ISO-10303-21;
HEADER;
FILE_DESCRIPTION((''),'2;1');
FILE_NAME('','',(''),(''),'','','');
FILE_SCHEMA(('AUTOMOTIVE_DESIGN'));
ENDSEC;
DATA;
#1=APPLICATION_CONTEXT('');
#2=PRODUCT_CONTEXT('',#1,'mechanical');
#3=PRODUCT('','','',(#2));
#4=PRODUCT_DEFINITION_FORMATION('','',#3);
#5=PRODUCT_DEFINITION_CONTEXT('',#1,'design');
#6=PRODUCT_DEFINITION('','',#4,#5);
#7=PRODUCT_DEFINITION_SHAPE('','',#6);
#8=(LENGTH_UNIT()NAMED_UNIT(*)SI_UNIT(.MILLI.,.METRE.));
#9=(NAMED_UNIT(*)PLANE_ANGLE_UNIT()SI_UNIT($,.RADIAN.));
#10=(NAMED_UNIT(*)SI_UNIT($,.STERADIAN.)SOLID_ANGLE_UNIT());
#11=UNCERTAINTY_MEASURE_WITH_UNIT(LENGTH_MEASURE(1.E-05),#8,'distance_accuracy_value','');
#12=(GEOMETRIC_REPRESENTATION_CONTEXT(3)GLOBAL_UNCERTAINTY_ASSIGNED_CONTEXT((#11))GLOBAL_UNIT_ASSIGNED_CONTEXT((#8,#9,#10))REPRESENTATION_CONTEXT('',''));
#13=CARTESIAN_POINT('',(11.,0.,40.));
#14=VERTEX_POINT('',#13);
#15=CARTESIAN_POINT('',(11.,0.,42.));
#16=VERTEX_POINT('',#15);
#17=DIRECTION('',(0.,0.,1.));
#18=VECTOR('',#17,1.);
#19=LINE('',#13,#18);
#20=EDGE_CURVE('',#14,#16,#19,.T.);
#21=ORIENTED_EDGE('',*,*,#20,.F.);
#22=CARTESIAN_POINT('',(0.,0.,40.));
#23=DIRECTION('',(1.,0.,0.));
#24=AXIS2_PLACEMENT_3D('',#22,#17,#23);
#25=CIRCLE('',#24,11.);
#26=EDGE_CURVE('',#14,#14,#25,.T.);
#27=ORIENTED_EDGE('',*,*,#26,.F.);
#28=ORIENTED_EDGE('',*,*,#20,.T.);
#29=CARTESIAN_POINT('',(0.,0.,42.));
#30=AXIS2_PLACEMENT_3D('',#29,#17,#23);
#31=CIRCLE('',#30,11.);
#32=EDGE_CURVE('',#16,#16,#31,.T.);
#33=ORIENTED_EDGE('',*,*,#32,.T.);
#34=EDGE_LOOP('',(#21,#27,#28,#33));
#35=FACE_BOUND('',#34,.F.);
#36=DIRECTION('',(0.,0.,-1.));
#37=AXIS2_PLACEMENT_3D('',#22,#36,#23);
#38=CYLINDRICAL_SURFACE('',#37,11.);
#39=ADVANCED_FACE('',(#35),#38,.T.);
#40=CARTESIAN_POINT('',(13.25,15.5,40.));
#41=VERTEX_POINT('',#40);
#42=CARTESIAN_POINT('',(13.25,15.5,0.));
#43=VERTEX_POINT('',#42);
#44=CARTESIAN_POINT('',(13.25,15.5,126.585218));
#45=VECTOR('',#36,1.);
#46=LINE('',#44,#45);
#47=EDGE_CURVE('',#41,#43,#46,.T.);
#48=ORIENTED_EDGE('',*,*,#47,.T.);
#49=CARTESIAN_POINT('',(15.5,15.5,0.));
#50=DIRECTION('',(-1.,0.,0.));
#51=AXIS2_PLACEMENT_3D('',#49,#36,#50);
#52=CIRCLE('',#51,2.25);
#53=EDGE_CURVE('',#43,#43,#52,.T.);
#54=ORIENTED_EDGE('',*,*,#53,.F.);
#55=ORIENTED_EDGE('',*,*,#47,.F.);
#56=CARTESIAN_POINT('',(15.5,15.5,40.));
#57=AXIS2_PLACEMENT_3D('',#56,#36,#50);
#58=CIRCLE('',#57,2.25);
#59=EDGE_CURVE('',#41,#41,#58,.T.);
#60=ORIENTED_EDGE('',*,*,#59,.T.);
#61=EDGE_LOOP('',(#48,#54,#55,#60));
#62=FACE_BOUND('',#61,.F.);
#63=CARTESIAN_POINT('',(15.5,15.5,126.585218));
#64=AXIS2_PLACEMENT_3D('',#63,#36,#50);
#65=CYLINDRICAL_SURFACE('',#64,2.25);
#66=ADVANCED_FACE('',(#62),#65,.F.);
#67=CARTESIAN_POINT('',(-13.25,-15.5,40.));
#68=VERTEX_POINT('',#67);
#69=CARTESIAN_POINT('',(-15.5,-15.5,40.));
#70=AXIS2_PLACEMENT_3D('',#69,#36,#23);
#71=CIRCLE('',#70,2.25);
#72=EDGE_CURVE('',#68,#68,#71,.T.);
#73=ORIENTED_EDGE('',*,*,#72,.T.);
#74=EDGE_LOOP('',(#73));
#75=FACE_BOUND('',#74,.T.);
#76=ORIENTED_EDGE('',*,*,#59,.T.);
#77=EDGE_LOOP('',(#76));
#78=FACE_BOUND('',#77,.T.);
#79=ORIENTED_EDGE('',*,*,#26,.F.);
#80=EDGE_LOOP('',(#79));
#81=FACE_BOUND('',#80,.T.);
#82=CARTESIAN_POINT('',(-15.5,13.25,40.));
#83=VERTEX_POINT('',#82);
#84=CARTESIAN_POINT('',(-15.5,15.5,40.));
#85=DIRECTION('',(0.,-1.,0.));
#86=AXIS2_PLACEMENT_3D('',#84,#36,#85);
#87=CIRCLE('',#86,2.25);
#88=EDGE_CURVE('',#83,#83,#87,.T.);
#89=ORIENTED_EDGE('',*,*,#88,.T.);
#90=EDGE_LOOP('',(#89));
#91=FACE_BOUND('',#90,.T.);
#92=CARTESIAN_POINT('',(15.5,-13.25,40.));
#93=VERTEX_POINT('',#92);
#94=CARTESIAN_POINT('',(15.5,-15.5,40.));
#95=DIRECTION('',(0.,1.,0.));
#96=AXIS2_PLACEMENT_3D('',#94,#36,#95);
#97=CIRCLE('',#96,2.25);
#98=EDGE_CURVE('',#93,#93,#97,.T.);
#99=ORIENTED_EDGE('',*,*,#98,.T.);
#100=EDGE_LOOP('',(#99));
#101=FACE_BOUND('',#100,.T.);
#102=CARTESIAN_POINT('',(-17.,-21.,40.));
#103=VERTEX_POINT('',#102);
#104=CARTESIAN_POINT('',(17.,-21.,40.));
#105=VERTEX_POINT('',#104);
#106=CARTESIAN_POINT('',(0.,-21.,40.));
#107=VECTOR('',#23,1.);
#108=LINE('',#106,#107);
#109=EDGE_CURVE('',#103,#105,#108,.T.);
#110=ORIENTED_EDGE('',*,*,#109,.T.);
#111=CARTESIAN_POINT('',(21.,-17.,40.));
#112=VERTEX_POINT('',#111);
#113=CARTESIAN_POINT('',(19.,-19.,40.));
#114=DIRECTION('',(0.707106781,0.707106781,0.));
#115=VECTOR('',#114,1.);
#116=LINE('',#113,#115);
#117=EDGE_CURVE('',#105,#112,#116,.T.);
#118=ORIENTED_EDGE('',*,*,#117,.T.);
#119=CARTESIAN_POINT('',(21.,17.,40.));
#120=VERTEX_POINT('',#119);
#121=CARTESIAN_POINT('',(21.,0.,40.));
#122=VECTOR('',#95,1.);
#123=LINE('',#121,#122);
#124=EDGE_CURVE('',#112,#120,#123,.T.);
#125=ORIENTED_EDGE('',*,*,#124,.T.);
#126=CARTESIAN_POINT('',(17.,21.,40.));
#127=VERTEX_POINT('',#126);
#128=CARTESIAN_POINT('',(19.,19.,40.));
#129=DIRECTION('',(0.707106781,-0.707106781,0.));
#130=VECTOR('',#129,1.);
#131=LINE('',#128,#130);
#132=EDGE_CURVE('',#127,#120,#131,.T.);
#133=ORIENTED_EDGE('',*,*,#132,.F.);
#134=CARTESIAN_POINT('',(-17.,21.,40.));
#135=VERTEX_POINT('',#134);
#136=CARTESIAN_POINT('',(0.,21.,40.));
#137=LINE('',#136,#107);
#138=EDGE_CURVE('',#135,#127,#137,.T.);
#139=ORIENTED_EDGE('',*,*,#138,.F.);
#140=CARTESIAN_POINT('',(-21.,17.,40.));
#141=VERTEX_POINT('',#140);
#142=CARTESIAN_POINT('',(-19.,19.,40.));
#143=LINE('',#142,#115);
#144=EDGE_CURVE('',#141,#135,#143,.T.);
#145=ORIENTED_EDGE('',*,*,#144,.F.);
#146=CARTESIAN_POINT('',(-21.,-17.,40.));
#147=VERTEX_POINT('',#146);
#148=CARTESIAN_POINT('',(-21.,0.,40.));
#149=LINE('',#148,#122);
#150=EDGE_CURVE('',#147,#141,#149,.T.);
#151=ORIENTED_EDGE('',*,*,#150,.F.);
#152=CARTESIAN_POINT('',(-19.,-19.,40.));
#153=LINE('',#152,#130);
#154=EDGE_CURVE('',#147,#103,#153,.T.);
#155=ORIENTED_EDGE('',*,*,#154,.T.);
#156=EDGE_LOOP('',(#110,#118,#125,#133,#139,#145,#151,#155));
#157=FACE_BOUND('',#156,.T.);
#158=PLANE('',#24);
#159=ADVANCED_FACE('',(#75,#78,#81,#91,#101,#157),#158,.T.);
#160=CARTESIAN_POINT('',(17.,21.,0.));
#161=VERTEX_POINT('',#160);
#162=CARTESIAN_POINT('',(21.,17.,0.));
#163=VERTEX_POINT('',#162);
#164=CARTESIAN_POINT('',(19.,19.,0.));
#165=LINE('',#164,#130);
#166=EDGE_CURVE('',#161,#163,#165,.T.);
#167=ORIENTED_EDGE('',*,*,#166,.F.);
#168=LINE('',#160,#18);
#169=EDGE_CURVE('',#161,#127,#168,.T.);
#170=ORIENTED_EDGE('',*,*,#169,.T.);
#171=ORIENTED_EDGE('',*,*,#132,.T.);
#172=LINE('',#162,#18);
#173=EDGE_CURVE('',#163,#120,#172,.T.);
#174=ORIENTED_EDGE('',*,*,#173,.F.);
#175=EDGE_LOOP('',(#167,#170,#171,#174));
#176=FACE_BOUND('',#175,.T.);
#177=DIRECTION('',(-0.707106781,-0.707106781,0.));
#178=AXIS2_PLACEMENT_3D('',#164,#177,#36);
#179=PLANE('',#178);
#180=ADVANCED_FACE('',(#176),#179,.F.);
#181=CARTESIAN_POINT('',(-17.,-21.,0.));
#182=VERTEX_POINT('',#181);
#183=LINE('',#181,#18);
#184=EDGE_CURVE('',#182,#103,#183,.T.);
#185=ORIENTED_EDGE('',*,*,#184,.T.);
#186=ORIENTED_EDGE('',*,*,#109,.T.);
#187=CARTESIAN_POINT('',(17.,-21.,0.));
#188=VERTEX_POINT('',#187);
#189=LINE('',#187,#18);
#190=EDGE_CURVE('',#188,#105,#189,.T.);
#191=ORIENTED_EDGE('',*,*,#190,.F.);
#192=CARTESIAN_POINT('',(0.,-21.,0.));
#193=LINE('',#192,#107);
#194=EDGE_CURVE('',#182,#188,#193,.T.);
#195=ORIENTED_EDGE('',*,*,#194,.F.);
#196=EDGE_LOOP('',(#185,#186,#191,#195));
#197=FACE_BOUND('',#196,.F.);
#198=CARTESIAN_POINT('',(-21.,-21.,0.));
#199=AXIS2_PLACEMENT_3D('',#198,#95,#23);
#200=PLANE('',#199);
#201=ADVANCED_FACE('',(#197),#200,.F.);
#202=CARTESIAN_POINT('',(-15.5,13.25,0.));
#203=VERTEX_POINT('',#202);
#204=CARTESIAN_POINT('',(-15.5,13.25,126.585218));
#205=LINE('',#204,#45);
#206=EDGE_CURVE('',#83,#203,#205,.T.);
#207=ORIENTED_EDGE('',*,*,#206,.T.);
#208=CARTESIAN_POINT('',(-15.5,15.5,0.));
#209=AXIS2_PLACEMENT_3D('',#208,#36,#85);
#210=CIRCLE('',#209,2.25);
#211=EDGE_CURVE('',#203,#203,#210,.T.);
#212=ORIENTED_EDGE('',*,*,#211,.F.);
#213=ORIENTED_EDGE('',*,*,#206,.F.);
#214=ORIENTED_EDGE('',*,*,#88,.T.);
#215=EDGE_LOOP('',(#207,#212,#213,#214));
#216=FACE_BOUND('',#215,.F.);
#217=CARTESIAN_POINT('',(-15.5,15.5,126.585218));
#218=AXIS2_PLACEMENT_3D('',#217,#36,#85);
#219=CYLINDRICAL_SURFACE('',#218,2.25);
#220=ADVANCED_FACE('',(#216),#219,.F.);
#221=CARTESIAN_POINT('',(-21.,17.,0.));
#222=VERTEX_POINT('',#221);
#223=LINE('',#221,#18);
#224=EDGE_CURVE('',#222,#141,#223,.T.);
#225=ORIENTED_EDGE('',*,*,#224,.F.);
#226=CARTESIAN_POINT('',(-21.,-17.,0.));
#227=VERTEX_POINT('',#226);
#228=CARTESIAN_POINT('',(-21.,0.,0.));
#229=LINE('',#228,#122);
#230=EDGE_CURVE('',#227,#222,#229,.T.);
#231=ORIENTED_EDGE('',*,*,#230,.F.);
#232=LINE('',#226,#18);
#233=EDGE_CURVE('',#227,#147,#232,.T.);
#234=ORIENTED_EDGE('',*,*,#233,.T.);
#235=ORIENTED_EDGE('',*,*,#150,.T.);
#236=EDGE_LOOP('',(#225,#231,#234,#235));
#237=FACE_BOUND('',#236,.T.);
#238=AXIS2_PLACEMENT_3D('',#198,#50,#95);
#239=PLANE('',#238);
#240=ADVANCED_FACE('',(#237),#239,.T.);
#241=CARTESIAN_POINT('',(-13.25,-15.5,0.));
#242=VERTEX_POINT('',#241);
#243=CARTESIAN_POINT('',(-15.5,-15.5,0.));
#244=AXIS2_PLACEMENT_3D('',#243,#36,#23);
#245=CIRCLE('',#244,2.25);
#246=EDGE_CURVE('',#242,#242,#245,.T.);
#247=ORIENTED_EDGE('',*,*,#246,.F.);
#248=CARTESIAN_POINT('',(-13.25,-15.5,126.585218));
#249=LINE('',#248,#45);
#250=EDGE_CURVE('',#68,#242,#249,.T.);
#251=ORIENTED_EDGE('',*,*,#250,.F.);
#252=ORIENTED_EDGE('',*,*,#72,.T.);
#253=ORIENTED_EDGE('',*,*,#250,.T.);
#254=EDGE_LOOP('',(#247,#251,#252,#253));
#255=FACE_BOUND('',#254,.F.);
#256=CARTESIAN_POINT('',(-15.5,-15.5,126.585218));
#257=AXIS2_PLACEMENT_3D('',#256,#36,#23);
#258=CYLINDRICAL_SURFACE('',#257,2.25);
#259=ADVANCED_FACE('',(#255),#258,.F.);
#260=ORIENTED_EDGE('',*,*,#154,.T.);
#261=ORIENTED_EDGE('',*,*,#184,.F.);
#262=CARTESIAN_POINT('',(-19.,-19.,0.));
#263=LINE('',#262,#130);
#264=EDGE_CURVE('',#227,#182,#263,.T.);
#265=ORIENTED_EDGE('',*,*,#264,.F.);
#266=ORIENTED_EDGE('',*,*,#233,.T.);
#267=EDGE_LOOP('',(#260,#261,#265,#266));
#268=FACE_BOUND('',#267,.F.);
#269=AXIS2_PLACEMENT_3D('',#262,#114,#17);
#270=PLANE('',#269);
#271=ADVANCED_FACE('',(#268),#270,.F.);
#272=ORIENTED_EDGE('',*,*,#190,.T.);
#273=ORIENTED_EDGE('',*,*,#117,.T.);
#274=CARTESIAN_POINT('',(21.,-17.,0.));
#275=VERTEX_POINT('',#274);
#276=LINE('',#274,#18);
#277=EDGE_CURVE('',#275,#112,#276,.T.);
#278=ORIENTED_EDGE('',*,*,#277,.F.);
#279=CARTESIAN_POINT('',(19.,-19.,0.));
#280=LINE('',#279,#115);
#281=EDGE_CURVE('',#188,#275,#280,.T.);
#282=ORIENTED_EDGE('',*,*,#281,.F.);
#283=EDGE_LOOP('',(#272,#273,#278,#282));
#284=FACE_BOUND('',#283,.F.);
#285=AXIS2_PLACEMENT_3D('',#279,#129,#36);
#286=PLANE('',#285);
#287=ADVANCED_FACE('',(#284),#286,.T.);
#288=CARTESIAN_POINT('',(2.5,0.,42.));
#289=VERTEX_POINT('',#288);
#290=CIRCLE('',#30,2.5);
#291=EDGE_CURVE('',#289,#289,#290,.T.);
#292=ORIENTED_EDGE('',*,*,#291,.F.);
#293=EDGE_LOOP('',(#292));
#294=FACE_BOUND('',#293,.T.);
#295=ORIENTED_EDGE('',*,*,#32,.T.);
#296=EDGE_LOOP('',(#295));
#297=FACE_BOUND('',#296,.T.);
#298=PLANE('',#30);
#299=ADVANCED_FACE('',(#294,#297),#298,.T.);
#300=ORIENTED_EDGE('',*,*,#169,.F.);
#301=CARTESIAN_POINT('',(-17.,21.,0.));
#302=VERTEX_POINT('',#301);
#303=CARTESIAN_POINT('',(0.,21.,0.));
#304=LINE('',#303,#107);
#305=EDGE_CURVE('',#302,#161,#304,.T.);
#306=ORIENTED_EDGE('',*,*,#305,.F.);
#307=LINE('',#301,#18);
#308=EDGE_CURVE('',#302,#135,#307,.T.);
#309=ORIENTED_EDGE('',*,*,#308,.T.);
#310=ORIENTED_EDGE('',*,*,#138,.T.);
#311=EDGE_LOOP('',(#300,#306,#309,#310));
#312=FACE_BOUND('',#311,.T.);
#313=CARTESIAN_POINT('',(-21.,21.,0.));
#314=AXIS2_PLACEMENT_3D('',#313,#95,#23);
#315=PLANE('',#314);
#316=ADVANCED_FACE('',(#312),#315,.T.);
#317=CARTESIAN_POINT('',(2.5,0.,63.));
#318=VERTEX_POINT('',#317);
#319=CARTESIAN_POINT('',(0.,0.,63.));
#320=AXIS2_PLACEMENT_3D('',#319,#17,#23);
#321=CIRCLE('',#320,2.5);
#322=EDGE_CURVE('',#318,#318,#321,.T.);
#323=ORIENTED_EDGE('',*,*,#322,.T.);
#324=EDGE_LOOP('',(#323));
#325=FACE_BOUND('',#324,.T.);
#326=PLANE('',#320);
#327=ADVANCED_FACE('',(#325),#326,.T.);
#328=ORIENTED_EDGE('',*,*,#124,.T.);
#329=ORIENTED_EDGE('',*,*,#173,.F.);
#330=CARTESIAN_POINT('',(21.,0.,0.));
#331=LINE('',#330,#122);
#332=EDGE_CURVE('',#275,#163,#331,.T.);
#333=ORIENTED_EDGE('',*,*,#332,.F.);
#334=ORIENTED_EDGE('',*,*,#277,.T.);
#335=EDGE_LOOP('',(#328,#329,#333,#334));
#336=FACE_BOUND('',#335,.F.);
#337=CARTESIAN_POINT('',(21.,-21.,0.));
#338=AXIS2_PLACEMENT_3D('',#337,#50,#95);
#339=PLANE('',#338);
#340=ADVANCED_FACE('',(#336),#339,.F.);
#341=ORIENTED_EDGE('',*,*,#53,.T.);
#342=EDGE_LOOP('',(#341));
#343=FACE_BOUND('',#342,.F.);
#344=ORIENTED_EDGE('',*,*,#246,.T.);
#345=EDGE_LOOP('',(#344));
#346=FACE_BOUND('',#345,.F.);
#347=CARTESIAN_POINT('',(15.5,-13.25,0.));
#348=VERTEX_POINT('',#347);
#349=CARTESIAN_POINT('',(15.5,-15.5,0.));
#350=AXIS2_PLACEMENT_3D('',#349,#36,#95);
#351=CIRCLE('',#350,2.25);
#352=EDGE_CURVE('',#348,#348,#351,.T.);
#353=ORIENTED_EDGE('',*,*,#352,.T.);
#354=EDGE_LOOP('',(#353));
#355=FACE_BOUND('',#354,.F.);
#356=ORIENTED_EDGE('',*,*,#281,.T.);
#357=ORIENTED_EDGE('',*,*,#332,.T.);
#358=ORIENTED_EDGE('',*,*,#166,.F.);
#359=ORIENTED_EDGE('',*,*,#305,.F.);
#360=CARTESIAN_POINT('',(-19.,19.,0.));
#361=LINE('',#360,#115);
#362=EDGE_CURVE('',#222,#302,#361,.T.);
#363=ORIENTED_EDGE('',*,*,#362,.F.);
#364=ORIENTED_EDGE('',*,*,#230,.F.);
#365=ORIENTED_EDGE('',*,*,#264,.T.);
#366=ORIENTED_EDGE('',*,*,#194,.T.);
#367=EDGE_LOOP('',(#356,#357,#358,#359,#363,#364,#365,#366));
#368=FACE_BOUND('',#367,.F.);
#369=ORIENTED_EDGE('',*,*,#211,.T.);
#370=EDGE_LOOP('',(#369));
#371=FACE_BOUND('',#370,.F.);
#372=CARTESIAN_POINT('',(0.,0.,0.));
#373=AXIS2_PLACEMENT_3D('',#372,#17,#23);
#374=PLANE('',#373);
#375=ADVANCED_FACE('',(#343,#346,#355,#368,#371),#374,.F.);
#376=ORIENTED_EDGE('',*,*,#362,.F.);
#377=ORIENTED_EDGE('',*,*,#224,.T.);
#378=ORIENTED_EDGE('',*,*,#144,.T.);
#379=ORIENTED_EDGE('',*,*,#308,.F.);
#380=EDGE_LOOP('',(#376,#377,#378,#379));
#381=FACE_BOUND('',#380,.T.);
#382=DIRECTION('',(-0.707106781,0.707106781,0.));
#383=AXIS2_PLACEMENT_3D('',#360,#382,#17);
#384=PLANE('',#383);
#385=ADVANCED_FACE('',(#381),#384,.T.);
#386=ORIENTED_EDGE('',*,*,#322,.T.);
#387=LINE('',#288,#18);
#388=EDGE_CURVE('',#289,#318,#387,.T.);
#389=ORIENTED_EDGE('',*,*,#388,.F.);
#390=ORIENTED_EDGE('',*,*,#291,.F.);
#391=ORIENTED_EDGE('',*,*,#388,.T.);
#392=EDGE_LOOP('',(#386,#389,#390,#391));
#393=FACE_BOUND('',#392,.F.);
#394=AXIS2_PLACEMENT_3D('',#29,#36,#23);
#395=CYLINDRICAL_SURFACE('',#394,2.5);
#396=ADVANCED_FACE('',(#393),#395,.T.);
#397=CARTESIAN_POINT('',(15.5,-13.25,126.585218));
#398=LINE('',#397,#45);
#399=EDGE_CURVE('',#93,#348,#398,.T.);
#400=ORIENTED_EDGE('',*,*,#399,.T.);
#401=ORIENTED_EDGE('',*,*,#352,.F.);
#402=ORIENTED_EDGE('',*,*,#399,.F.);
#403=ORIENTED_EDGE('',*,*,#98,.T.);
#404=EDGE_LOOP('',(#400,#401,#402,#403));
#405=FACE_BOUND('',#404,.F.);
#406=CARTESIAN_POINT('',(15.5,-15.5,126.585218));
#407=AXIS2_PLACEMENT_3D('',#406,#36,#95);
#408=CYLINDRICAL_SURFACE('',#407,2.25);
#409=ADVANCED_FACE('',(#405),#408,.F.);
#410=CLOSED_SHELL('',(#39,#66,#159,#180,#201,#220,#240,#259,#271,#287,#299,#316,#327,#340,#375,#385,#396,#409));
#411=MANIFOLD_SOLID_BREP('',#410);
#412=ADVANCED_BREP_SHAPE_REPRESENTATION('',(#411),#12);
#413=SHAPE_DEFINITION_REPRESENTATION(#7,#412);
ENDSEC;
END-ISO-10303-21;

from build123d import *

# Parameters (mm, degrees)
F1_W            = 42
F1_H            = 42
F2_DEPTH        = 40
F3_R            = 11
F4_DEPTH        = 2
F5_R            = 2.5
F6_DEPTH        = 21
F8_D            = 4.5
F8_COPIES_COUNT = 4
F9_SIZE         = 4


# Not quite as in the source:
# - a pattern or mirror of a feature is missing from the dataset's text; its kind, count and spacing are read off the source's solid


with BuildPart() as f2:
    # F1 (on Top) → F2 (new body)
    with BuildSketch(Plane.XY):
        Rectangle(F1_W, F1_H)
    extrude(amount=F2_DEPTH)

    # F3 (on face) → F4 (join)
    with BuildSketch(Plane.XY.offset(40)):
        Circle(F3_R)
    extrude(amount=F4_DEPTH)

    # F5 (on face) → F6 (join)
    with BuildSketch(Plane.XY.offset(42)):
        Circle(F5_R)
    extrude(amount=F6_DEPTH)

    # F8 (through all)
    with Locations(Plane.XY.offset(40)):
        with Locations((15.5, 15.5)):
            f8 = Hole(F8_D / 2)

    # F8_copies: F8 ×4 about axis
    f8_copies_axis = Axis((0, 0, 0), (0, 0, 1))
    for i in range(1, F8_COPIES_COUNT):
        add(f8.rotate(f8_copies_axis, i * 360 / F8_COPIES_COUNT), mode=Mode.SUBTRACT)

    # F9
    f9_edges = [f2.edges().sort_by_distance(p)[0] for p in [
        (21, 21, 20),
        (21, -21, 20),
        (-21, -21, 20),
        (-21, 21, 20),
    ]]
    chamfer(f9_edges, length=F9_SIZE)


solid = f2.part
